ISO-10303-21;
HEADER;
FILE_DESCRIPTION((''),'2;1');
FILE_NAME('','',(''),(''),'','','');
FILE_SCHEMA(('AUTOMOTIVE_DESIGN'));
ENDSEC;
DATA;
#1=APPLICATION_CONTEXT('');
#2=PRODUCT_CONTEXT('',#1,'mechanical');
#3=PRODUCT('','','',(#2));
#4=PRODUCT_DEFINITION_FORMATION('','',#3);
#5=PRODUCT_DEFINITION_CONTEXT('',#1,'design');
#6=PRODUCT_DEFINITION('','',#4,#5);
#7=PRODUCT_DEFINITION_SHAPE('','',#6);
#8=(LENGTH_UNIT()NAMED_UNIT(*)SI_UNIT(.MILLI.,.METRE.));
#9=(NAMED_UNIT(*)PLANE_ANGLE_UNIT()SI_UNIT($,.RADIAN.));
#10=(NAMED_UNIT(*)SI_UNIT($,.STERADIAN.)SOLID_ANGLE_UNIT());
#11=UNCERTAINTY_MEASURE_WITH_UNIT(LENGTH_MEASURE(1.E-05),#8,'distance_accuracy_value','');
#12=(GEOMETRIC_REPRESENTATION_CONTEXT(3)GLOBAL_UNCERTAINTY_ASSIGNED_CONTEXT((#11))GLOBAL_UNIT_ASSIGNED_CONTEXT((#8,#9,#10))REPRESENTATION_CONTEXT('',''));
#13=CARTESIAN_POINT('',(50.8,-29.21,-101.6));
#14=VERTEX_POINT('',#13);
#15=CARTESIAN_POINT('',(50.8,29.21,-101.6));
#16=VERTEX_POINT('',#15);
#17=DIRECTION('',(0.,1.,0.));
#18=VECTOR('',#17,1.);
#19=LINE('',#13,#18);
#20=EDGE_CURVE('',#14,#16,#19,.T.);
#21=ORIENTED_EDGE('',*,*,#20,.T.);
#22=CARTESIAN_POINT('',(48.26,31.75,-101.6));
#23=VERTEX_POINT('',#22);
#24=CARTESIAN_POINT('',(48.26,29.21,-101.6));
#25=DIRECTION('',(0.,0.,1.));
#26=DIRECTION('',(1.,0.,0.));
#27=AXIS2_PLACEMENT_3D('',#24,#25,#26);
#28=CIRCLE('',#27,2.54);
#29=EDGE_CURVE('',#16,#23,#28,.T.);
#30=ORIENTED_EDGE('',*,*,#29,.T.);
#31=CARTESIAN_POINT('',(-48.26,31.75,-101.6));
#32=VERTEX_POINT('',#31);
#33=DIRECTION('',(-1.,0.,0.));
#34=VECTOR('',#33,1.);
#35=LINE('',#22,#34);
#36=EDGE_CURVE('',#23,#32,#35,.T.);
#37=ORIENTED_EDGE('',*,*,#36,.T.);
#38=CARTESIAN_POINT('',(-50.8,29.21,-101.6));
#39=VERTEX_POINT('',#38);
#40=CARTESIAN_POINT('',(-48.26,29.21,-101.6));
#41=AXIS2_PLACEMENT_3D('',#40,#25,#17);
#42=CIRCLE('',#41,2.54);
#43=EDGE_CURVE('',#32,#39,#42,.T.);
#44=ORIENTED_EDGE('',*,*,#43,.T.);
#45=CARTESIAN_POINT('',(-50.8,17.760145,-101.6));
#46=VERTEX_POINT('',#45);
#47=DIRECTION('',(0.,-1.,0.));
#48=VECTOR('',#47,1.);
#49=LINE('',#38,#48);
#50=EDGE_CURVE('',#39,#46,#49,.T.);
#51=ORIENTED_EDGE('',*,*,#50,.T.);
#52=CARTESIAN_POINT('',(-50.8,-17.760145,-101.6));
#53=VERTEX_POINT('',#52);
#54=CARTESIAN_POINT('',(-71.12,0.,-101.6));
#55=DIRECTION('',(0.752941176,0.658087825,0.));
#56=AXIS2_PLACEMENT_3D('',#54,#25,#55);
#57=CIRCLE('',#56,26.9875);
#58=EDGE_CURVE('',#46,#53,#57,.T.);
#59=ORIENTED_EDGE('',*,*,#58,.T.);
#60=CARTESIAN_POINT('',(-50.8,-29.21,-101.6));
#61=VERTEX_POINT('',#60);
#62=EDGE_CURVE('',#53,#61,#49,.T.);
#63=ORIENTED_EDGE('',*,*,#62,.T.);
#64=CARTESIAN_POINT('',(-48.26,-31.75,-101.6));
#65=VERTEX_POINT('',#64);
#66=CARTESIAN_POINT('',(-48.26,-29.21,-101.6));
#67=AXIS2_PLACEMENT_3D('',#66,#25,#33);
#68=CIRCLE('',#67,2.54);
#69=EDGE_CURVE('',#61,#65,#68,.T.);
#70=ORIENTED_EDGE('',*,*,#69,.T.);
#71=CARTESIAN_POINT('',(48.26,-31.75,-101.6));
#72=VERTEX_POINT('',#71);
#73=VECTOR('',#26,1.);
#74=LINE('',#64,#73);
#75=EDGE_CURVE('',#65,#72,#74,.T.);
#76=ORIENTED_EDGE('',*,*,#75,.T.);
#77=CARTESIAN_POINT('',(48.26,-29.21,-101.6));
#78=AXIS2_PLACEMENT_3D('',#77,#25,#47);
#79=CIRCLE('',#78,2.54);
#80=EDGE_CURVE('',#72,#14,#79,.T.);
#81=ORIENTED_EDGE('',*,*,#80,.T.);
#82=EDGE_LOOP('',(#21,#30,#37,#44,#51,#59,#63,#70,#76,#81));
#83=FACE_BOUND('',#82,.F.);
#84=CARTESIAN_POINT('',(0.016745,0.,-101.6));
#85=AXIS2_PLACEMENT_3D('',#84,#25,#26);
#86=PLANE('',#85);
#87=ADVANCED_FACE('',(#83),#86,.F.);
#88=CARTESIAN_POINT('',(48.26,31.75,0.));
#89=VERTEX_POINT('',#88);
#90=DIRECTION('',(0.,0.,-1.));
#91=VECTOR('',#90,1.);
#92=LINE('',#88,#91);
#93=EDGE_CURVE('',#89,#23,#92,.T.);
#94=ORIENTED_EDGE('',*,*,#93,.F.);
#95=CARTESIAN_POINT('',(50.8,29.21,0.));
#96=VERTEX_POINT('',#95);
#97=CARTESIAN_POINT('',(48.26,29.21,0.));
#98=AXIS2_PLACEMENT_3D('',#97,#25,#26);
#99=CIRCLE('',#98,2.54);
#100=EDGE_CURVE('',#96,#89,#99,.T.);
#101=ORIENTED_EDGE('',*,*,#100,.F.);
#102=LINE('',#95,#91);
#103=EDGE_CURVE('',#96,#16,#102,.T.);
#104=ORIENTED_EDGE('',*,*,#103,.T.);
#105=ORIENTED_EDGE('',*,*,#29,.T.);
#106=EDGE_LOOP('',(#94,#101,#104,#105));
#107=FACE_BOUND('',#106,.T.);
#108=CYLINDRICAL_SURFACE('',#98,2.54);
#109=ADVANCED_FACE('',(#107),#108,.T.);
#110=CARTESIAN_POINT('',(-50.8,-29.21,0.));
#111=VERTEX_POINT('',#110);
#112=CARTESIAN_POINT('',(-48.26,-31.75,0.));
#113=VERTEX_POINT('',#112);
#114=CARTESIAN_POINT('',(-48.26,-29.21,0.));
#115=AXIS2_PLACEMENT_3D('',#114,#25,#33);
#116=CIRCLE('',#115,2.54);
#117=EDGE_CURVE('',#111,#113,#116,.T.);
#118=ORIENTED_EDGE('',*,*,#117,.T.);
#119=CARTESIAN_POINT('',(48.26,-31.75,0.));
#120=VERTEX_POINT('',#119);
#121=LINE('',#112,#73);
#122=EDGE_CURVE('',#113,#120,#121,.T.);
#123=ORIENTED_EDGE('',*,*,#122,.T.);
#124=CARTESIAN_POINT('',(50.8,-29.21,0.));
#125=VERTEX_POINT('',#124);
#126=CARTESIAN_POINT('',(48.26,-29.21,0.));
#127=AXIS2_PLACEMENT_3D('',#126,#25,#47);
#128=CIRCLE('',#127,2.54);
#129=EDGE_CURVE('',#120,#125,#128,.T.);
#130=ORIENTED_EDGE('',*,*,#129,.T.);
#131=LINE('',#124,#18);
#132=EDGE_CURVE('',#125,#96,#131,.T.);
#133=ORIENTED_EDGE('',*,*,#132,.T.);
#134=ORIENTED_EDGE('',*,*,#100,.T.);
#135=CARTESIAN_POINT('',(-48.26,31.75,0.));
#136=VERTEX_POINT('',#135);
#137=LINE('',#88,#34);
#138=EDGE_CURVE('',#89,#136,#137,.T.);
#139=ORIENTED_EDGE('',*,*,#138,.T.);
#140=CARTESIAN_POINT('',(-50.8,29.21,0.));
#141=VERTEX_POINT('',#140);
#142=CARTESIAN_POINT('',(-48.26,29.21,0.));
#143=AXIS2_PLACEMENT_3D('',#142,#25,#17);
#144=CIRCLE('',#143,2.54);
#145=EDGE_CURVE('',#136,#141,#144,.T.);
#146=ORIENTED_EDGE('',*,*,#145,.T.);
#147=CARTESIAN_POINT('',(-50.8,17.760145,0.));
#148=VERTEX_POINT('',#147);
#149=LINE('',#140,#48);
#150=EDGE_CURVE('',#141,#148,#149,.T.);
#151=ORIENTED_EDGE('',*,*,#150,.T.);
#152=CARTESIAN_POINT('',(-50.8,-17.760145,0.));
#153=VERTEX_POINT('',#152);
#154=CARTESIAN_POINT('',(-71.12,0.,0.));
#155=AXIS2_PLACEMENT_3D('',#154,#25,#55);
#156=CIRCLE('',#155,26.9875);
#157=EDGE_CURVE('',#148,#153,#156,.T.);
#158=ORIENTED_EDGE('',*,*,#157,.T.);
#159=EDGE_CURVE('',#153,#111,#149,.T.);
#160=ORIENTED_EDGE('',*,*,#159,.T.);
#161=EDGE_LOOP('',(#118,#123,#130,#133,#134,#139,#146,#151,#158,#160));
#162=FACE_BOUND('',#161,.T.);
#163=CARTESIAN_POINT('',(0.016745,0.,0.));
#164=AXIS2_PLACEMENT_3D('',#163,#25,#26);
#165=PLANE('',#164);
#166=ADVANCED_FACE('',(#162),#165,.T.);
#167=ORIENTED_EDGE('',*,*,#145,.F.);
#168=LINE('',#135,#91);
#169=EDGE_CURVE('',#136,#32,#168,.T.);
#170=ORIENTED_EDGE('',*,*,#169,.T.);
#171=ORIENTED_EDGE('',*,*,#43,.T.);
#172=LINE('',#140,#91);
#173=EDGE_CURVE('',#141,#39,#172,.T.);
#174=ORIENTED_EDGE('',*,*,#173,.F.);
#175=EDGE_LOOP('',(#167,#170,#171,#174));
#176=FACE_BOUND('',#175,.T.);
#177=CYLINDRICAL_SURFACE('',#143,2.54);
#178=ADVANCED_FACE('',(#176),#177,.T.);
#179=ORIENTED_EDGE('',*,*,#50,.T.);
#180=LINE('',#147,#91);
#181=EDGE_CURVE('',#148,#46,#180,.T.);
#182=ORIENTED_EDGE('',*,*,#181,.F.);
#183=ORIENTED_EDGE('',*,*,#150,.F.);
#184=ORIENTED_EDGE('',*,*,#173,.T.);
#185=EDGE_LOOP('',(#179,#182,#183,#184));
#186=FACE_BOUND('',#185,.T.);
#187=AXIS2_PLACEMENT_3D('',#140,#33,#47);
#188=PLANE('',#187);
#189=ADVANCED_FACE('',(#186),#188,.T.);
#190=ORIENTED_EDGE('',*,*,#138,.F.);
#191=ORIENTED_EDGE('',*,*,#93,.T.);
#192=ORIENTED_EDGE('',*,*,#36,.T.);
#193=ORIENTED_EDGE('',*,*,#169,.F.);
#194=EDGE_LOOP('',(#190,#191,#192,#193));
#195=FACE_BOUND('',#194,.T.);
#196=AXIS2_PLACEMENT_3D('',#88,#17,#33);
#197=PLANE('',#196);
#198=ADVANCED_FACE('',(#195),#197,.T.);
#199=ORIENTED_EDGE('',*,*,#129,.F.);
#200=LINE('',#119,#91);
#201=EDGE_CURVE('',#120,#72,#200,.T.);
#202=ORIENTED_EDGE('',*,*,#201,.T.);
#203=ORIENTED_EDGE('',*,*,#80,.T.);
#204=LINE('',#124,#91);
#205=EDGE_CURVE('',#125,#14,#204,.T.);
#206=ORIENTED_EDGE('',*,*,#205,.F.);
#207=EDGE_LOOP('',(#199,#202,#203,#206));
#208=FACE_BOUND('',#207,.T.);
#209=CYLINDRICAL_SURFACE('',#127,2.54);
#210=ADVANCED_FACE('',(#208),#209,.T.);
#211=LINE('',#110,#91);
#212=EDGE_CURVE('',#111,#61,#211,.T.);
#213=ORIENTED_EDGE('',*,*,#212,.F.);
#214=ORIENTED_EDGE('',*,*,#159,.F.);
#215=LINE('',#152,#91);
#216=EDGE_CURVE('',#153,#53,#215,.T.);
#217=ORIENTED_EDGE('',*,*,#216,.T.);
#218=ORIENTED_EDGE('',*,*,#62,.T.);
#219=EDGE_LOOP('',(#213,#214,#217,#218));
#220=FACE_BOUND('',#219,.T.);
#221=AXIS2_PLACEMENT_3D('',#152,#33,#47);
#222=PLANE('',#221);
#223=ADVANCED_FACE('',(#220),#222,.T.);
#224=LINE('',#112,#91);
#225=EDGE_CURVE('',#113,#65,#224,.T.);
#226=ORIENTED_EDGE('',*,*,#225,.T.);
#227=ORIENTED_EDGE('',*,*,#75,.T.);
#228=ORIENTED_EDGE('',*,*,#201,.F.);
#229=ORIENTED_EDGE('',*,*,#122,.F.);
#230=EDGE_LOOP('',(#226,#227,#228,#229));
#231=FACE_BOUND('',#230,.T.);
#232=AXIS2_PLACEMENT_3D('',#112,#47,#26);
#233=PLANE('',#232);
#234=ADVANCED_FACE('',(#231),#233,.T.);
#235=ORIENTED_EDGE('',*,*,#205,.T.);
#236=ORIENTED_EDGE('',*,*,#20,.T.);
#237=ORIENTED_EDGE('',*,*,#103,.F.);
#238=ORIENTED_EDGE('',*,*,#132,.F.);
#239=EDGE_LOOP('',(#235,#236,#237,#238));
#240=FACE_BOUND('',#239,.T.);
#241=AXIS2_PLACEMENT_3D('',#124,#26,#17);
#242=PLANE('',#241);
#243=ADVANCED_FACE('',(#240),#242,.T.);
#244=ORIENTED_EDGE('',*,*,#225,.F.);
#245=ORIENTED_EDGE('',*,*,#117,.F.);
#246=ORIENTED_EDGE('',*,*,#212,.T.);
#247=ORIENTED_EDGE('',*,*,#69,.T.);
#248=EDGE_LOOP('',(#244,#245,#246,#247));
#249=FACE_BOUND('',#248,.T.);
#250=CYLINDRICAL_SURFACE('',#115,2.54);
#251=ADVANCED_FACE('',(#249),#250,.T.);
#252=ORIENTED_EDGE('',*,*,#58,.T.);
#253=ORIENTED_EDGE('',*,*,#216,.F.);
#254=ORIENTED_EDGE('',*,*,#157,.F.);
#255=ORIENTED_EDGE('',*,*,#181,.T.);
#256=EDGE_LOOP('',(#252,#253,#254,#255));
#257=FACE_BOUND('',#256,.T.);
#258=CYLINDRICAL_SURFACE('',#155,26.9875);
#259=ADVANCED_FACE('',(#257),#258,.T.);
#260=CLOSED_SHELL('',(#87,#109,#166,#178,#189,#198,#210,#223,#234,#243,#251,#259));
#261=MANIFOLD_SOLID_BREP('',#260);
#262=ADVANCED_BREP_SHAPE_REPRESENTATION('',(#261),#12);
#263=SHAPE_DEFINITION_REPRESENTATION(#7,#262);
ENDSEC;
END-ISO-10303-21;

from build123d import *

# Parameters (mm, degrees)
F1_DEPTH = 101.6


with BuildPart() as f1:
    # F0 (on Top) → F1 (new body)
    with BuildSketch(Plane.XY):
        with BuildLine():
            ThreePointArc((50.8, 29.21), (50.0560512242, 31.0060512242), (48.26, 31.75))
            Line((48.26, 31.75), (-48.26, 31.75))
            ThreePointArc((-48.26, 31.75), (-50.0560512242, 31.0060512242), (-50.8, 29.21))
            Line((-50.8, 29.21), (-50.8, 17.7601451641))
            ThreePointArc((-50.8, 17.7601451641), (-45.8543003634, 9.4852294714), (-44.1325, 0))
            ThreePointArc((-44.1325, 0), (-45.8543003634, -9.4852294714), (-50.8, -17.7601451641))
            Line((-50.8, -17.7601451641), (-50.8, -29.21))
            ThreePointArc((-50.8, -29.21), (-50.0560512242, -31.0060512242), (-48.26, -31.75))
            Line((-48.26, -31.75), (48.26, -31.75))
            ThreePointArc((48.26, -31.75), (50.0560512242, -31.0060512242), (50.8, -29.21))
            Line((50.8, -29.21), (50.8, 29.21))
        make_face()
        with BuildLine():
            ThreePointArc((-44.1325, 0), (-45.8543003634, 9.4852294714), (-50.8, 17.7601451641))
            Line((-50.8, 17.7601451641), (-50.8, -17.7601451641))
            ThreePointArc((-50.8, -17.7601451641), (-45.8543003634, -9.4852294714), (-44.1325, 0))
        make_face()
        with BuildLine():
            Line((-50.8, -17.7601451641), (-50.8, 17.7601451641))
            ThreePointArc((-50.8, 17.7601451641), (-98.1075, 0), (-50.8, -17.7601451641))
        make_face()
    extrude(amount=-F1_DEPTH)


solid = f1.part
